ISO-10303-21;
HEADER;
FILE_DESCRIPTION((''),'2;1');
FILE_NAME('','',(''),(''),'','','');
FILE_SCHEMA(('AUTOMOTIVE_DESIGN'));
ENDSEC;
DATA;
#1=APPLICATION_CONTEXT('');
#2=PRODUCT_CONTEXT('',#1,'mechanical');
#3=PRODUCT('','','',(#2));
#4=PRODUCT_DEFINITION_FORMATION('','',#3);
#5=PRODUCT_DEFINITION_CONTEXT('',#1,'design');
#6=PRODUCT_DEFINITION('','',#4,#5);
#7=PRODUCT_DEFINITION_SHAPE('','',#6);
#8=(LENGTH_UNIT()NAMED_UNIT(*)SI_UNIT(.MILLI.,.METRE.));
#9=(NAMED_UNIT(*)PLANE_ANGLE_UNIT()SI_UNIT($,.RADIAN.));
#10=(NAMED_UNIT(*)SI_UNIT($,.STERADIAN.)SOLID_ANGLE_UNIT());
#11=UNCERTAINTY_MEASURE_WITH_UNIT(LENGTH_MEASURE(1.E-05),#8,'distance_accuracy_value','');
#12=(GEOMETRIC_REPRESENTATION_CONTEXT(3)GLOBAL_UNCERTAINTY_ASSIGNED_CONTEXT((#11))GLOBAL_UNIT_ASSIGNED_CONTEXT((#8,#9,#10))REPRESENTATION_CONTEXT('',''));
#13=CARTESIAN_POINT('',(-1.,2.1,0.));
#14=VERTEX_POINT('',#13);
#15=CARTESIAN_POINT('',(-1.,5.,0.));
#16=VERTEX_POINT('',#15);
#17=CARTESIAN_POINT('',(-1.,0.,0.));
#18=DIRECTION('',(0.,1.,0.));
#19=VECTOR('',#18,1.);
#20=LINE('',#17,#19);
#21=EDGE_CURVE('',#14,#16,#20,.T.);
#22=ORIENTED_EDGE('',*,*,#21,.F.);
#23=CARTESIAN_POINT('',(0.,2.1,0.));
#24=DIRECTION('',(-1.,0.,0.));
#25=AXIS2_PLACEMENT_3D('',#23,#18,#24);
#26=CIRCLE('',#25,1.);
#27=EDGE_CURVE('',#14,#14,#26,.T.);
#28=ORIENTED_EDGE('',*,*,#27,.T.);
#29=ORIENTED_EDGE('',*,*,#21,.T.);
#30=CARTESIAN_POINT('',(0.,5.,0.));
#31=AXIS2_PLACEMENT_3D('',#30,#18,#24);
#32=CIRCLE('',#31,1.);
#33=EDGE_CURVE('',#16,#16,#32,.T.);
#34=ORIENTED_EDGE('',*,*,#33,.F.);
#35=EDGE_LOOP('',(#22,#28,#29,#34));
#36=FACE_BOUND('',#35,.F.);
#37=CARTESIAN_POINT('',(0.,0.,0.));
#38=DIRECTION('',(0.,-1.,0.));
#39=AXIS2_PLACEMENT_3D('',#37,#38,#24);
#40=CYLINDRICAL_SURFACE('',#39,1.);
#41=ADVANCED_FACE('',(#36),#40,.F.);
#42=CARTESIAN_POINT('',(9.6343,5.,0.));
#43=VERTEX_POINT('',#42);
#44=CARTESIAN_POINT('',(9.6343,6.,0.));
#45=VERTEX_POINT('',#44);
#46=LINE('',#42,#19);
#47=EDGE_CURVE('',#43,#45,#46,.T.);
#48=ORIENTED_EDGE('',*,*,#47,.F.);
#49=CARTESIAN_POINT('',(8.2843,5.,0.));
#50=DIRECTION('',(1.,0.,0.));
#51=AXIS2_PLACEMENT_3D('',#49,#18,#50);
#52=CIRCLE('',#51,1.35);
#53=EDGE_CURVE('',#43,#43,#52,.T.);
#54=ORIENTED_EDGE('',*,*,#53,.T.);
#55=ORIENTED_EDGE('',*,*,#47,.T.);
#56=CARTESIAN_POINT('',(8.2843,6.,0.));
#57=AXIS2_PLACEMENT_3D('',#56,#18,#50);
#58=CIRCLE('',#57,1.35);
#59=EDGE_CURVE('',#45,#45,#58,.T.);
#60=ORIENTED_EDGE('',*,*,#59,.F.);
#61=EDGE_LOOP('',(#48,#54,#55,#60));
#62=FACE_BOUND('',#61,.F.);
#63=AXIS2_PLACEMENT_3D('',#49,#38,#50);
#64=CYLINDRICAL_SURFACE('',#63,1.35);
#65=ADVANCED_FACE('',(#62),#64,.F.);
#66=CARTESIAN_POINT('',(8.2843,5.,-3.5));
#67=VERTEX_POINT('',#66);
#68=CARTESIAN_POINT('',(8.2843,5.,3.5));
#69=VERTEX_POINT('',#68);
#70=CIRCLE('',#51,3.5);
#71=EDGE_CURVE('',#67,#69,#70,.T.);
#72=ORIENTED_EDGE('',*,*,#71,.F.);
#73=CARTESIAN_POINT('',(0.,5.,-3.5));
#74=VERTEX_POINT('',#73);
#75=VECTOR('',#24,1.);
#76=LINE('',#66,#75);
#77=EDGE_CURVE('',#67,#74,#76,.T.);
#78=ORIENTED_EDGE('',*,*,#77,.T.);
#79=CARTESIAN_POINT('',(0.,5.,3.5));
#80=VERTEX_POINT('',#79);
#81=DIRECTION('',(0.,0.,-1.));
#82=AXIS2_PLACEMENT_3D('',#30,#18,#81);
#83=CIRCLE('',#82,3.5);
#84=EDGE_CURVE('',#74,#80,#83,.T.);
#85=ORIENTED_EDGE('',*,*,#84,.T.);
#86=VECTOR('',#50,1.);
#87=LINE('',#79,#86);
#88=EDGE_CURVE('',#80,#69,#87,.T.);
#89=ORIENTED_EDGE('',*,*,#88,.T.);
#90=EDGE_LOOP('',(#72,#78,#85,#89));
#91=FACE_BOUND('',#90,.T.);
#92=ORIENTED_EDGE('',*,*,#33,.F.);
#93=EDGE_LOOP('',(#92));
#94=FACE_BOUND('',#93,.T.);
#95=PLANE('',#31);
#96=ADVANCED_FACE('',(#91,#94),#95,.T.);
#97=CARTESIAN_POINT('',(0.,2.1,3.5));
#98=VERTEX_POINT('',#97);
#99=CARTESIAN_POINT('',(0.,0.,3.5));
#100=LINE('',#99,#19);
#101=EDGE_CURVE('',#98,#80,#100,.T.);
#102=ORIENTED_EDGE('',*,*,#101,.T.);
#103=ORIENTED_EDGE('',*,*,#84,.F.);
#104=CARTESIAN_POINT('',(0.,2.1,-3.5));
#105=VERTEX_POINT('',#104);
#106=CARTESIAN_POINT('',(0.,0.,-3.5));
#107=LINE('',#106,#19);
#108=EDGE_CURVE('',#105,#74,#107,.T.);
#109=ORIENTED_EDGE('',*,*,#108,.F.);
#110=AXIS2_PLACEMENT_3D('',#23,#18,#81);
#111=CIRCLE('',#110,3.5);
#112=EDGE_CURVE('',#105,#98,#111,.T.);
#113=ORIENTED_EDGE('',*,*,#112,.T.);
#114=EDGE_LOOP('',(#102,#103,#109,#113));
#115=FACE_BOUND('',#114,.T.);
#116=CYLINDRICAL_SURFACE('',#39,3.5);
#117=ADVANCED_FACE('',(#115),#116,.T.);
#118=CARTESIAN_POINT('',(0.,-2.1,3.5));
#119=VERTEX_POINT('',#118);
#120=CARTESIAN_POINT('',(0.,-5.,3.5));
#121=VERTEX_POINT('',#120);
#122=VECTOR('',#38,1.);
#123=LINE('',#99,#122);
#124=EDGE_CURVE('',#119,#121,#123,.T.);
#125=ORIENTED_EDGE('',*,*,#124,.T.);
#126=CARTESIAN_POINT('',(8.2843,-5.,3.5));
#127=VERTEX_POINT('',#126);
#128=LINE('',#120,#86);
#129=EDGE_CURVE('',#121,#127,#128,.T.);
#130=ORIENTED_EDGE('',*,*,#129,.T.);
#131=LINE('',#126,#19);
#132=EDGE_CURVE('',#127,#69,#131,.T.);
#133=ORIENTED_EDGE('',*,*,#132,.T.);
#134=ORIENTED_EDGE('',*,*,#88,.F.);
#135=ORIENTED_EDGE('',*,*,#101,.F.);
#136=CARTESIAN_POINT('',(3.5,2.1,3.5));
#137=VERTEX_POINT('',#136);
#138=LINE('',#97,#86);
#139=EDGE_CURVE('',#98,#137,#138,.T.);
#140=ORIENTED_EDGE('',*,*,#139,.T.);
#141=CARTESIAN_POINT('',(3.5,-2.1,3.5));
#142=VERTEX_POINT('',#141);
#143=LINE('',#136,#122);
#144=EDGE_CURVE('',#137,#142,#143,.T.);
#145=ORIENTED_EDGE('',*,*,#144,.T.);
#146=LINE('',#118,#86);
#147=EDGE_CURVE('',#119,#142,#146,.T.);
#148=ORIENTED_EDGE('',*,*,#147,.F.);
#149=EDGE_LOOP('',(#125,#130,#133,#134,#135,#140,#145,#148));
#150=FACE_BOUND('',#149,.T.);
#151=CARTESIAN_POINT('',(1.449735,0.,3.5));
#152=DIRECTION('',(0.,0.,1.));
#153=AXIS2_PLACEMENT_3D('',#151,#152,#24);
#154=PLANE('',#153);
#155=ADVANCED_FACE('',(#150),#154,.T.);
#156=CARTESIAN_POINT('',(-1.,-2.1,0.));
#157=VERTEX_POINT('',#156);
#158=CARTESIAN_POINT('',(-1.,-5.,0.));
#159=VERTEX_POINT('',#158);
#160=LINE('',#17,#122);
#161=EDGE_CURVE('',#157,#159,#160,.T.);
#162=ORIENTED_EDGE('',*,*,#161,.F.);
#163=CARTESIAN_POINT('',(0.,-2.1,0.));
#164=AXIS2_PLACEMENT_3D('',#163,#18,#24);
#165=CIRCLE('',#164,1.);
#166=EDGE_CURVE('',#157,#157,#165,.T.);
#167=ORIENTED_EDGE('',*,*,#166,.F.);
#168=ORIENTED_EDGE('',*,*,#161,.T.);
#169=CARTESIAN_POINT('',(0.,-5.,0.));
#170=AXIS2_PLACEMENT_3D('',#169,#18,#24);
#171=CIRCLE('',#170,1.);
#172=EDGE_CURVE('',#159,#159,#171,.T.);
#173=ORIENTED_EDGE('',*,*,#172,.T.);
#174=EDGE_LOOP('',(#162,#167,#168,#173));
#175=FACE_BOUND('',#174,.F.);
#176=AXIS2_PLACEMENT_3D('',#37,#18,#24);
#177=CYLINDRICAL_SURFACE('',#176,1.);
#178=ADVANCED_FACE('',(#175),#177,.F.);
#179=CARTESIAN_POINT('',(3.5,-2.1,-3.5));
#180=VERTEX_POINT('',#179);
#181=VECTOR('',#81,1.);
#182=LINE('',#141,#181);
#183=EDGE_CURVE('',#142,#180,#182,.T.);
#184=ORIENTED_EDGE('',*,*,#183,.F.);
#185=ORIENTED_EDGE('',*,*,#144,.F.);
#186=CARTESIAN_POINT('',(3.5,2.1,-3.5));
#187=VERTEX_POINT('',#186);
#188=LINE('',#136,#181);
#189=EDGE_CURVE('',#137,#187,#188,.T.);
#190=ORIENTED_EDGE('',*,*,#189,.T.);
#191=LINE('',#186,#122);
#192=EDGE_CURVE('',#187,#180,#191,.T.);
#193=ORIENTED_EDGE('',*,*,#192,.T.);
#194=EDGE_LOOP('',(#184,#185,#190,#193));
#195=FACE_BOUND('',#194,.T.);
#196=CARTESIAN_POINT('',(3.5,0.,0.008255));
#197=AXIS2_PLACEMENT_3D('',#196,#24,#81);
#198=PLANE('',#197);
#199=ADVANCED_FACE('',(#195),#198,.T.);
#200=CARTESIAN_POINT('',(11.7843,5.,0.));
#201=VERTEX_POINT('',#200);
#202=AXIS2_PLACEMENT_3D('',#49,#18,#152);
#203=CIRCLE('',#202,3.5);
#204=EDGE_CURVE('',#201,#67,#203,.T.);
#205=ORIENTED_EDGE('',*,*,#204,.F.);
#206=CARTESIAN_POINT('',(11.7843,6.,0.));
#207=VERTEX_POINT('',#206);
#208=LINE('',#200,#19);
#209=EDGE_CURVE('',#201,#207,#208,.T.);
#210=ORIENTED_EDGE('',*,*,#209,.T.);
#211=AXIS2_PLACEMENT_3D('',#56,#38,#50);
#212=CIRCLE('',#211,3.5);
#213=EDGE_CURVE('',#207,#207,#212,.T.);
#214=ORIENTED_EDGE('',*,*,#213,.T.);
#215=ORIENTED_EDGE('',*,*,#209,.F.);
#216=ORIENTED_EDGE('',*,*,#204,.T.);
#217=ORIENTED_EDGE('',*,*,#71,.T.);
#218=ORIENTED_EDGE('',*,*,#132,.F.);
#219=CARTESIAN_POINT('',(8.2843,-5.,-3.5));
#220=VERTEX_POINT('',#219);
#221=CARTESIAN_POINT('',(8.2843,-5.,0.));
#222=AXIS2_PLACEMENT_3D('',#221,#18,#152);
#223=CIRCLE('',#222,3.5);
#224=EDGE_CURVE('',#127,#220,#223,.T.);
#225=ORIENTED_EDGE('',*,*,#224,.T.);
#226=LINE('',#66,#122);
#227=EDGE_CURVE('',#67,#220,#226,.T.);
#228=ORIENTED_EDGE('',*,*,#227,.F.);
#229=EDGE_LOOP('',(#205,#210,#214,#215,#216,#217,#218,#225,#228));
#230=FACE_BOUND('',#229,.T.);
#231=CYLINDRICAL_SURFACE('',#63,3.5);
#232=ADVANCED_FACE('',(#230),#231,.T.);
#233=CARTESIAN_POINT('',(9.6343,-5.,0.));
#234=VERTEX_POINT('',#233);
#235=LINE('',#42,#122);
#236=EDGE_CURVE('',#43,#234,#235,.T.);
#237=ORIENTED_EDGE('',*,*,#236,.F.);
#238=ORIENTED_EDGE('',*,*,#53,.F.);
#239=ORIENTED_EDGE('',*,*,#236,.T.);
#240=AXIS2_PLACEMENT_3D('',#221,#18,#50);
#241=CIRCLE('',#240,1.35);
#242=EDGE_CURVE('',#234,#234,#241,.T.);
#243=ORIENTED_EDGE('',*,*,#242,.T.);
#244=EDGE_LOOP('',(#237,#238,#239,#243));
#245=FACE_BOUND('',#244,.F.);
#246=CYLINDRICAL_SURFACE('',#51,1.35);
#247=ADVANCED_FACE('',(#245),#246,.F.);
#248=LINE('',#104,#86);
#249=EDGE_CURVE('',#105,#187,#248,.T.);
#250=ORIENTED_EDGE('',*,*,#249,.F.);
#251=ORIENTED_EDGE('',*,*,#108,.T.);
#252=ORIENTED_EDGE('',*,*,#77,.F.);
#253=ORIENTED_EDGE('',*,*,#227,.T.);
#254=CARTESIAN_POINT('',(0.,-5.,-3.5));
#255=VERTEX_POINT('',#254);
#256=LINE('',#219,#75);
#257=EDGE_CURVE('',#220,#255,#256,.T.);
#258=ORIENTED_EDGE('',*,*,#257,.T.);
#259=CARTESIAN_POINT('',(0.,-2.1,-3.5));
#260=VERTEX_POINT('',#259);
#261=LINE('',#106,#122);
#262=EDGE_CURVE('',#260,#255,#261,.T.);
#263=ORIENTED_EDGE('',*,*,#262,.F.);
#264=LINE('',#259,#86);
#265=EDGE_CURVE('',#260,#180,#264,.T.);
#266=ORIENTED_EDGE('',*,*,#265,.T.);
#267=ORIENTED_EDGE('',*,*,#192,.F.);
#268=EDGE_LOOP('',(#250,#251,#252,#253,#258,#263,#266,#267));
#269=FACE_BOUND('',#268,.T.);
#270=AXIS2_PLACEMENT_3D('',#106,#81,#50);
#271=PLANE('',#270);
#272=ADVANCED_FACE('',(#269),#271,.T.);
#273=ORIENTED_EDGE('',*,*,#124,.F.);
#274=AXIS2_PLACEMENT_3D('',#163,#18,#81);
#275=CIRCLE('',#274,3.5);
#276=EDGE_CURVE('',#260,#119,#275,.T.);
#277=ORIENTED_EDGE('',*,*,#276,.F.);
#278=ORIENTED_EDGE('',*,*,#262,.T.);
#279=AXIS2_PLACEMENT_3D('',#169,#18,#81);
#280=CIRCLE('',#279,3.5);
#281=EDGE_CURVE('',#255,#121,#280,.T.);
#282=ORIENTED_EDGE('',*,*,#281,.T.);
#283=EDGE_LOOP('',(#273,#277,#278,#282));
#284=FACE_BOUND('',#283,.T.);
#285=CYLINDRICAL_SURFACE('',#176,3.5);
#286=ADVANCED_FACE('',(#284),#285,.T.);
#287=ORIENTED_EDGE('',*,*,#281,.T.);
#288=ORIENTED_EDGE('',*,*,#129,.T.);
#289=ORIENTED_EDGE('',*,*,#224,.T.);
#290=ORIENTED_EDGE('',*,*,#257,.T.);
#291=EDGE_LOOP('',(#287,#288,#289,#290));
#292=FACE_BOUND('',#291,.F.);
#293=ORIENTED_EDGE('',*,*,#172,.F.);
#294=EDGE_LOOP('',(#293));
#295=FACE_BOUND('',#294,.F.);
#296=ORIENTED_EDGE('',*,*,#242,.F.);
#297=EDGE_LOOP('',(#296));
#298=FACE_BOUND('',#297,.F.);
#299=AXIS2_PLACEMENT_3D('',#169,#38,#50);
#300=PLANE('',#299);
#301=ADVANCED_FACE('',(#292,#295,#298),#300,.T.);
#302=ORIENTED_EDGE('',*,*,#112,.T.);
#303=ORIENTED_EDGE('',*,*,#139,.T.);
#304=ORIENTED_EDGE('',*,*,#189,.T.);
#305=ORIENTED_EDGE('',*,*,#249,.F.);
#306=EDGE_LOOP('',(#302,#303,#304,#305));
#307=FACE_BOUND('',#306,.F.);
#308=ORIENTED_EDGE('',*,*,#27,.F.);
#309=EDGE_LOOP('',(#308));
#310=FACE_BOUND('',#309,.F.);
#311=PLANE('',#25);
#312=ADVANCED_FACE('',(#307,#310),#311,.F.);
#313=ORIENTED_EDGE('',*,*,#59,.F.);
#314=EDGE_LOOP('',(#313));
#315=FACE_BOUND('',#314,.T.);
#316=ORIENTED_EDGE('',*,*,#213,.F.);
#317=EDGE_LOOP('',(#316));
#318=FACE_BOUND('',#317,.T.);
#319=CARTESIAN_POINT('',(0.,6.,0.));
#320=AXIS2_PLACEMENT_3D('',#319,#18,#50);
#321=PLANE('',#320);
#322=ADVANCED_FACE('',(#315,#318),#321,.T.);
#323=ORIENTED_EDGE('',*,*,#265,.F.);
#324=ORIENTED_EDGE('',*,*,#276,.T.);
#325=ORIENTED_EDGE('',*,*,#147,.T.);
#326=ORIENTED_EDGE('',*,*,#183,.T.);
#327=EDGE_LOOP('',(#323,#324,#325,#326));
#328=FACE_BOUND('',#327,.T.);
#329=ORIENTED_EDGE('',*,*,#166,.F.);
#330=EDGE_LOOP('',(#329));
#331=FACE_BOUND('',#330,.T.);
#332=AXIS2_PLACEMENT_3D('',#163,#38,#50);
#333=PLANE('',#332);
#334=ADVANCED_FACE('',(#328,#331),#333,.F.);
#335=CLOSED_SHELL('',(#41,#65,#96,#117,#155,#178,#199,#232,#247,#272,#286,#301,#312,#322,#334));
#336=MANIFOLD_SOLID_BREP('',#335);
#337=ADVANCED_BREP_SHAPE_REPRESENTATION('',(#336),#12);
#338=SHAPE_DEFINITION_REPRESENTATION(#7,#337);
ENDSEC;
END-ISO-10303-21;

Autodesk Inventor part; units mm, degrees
ref_plane "YZ Plane" through (0, 0, 0) normal (1, 0, 0) x (0, 1, 0)
ref_plane "XZ Plane" through (0, 0, 0) normal (0, 1, 0) x (-1, 0, 0)
ref_plane "XY Plane" through (0, 0, 0) normal (0, 0, 1) x (1, 0, 0)
sketch "スケッチ1" plane through (0, 0, 0) normal (0, 1, 0) x (-1, 0, 0)
  circle A0 centre (0, 0) radius 1
  circle A1 centre (0, 0) radius 3.5
  circle A2 centre (-8.2843, 0) radius 3.5
  line L0 (0, -3.5) -> (-8.2843, -3.5)
  line L1 (-8.2843, -3.5) -> (-8.2843, 3.5) construction
  line L2 (-8.2843, 3.5) -> (0, 3.5)
  line L3 (0, 3.5) -> (0, -3.5) construction
  circle A3 centre (-8.2843, 0) radius 1
  line L4 (-3.5, -3.5) -> (-4.7843, -3.5)
  line L5 (-4.7843, -3.5) -> (-4.7843, 3.5)
  line L6 (-4.7843, 3.5) -> (-3.5, 3.5)
  line L7 (-3.5, 3.5) -> (-3.5, -3.5)
  circle A4 centre (-4.1421, 10) radius 10
  line L8 (0, 0) -> (-8.2843, 0)
  line L9 (-4.1421, 10) -> (0, 0)
  line L10 (-4.1421, 10) -> (-8.2843, 0)
  point P0 (-8.2843, -3.5)
  point P1 (-4.7843, -3.5)
  point P2 (-4.1421, 0)
  dimension "d1" = 7
  dimension "d0" = 2
  dimension "d13" = 20
  dimension "d14" = 45
extrude "押し出し3" add sketch "スケッチ1" along normal blind 5 contours A0 A4 A1 L8 | A0 L9 A1 A4 | L8 A4 A0 | A0 A4 A1 L9 | L7 L2 L9 A1 | A4 L5 L2 L7 | A1 L0 L7 | L7 L0 L5 L8 A4 | L9 L2 A1 | L8 A2 A4 | A4 A3 L8 A2 | A2 L10 A3 A4 | L5 A2 L10 L2 | L0 A2 L5 | A4 A3 L10 A2 | A2 L8 A3 A4 | L2 L10 A2
extrude "押し出し4" cut sketch "スケッチ1" along normal blind 2.1 contours A0 A4 A1 L8 | A0 L9 A1 A4 | L8 A4 A0 | A0 A4 A1 L9 | L7 L2 L9 A1 | A1 L0 L7 | L9 L2 A1 | A4 A3 L8 A2 | A2 L10 A3 A4 | L5 A2 L10 L2 | L0 A2 L5 | A4 A3 L10 A2 | A2 L8 A3 A4 | L2 L10 A2
mirror "ミラー2" about plane through (4.1421, 0, 0) normal (0, -1, 0)
sketch "スケッチ3" plane through (0, 5, 0) normal (0, 1, 0) x (1, 0, 0)
  circle A0 centre (14.2843, 0) radius 1.35
  line L0 (4.7843, -3.5) -> (8.2843, -3.5) projected
  line L1 (8.2843, -3.5) -> (17.7843, -3.5)
  line L2 (17.7843, -3.5) -> (17.7843, 3.5)
  line L3 (17.7843, 3.5) -> (8.2843, 3.5)
  line L4 (8.2843, 3.5) -> (8.2843, -3.5)
  line L5 (8.2843, 3.5) -> (0, 3.5) projected
  circle A1 centre (14.2843, 0) radius 3.5
  line L6 (4.7843, -3.5) -> (8.2843, -3.5) projected
  line L7 (4.7843, 3.5) -> (4.7843, -3.5) projected
  line L8 (8.2843, 3.5) -> (4.7843, 3.5) projected
  arc A2 (8.2843, -3.5) -> (8.2843, 3.5) centre (8.2843, 0) ccw projected
  circle A3 centre (8.2843, 0) radius 1 projected
  point P0 (0, 0)
  point P1 (8.2843, 0)
  point P2 (14.2843, -3.5)
  point P3 (14.2843, 3.5)
  dimension "d15" = 2.7
  dimension "d16" = 6
extrude "押し出し5" add sketch "スケッチ3" against normal up to surface (10 mm away) contours L7 L5 L4 A3 L0 | L4 A3 A2 A1 | A1 A2 picked at (11.1245, 0.126)
sketch "スケッチ4" plane through (0, 5, 0) normal (0, 1, 0) x (1, 0, 0)
  circle A0 centre (8.2843, 0) radius 1 projected
  circle A1 centre (8.2843, 0) radius 1.35
  point P0 (0, 0)
  dimension "d20" = 2.7
extrude "押し出し6" cut sketch "スケッチ4" against normal through all contours A0 | A1
sketch "スケッチ5" plane through (0, 5, 0) normal (0, 1, 0) x (1, 0, 0)
  circle A0 centre (8.2843, 0) radius 1.35 projected
  circle A1 centre (0, 0) radius 1 projected
  arc A2 (0, 3.5) -> (0, -3.5) centre (0, 0) ccw projected
  line L0 (0, -3.5) -> (8.2843, -3.5) projected
  circle A3 centre (8.2843, 0) radius 3.5
  line L1 (8.2843, 3.5) -> (0, 3.5) projected
  arc A4 (8.2843, -3.5) -> (8.2843, 3.5) centre (8.2843, 0) ccw projected
  point P0 (8.2843, -3.5)
  point P1 (8.2843, -3.5)
extrude "押し出し7" add sketch "スケッチ5" along normal blind 1 contours A3
properties part number "chain_fork_connector"
